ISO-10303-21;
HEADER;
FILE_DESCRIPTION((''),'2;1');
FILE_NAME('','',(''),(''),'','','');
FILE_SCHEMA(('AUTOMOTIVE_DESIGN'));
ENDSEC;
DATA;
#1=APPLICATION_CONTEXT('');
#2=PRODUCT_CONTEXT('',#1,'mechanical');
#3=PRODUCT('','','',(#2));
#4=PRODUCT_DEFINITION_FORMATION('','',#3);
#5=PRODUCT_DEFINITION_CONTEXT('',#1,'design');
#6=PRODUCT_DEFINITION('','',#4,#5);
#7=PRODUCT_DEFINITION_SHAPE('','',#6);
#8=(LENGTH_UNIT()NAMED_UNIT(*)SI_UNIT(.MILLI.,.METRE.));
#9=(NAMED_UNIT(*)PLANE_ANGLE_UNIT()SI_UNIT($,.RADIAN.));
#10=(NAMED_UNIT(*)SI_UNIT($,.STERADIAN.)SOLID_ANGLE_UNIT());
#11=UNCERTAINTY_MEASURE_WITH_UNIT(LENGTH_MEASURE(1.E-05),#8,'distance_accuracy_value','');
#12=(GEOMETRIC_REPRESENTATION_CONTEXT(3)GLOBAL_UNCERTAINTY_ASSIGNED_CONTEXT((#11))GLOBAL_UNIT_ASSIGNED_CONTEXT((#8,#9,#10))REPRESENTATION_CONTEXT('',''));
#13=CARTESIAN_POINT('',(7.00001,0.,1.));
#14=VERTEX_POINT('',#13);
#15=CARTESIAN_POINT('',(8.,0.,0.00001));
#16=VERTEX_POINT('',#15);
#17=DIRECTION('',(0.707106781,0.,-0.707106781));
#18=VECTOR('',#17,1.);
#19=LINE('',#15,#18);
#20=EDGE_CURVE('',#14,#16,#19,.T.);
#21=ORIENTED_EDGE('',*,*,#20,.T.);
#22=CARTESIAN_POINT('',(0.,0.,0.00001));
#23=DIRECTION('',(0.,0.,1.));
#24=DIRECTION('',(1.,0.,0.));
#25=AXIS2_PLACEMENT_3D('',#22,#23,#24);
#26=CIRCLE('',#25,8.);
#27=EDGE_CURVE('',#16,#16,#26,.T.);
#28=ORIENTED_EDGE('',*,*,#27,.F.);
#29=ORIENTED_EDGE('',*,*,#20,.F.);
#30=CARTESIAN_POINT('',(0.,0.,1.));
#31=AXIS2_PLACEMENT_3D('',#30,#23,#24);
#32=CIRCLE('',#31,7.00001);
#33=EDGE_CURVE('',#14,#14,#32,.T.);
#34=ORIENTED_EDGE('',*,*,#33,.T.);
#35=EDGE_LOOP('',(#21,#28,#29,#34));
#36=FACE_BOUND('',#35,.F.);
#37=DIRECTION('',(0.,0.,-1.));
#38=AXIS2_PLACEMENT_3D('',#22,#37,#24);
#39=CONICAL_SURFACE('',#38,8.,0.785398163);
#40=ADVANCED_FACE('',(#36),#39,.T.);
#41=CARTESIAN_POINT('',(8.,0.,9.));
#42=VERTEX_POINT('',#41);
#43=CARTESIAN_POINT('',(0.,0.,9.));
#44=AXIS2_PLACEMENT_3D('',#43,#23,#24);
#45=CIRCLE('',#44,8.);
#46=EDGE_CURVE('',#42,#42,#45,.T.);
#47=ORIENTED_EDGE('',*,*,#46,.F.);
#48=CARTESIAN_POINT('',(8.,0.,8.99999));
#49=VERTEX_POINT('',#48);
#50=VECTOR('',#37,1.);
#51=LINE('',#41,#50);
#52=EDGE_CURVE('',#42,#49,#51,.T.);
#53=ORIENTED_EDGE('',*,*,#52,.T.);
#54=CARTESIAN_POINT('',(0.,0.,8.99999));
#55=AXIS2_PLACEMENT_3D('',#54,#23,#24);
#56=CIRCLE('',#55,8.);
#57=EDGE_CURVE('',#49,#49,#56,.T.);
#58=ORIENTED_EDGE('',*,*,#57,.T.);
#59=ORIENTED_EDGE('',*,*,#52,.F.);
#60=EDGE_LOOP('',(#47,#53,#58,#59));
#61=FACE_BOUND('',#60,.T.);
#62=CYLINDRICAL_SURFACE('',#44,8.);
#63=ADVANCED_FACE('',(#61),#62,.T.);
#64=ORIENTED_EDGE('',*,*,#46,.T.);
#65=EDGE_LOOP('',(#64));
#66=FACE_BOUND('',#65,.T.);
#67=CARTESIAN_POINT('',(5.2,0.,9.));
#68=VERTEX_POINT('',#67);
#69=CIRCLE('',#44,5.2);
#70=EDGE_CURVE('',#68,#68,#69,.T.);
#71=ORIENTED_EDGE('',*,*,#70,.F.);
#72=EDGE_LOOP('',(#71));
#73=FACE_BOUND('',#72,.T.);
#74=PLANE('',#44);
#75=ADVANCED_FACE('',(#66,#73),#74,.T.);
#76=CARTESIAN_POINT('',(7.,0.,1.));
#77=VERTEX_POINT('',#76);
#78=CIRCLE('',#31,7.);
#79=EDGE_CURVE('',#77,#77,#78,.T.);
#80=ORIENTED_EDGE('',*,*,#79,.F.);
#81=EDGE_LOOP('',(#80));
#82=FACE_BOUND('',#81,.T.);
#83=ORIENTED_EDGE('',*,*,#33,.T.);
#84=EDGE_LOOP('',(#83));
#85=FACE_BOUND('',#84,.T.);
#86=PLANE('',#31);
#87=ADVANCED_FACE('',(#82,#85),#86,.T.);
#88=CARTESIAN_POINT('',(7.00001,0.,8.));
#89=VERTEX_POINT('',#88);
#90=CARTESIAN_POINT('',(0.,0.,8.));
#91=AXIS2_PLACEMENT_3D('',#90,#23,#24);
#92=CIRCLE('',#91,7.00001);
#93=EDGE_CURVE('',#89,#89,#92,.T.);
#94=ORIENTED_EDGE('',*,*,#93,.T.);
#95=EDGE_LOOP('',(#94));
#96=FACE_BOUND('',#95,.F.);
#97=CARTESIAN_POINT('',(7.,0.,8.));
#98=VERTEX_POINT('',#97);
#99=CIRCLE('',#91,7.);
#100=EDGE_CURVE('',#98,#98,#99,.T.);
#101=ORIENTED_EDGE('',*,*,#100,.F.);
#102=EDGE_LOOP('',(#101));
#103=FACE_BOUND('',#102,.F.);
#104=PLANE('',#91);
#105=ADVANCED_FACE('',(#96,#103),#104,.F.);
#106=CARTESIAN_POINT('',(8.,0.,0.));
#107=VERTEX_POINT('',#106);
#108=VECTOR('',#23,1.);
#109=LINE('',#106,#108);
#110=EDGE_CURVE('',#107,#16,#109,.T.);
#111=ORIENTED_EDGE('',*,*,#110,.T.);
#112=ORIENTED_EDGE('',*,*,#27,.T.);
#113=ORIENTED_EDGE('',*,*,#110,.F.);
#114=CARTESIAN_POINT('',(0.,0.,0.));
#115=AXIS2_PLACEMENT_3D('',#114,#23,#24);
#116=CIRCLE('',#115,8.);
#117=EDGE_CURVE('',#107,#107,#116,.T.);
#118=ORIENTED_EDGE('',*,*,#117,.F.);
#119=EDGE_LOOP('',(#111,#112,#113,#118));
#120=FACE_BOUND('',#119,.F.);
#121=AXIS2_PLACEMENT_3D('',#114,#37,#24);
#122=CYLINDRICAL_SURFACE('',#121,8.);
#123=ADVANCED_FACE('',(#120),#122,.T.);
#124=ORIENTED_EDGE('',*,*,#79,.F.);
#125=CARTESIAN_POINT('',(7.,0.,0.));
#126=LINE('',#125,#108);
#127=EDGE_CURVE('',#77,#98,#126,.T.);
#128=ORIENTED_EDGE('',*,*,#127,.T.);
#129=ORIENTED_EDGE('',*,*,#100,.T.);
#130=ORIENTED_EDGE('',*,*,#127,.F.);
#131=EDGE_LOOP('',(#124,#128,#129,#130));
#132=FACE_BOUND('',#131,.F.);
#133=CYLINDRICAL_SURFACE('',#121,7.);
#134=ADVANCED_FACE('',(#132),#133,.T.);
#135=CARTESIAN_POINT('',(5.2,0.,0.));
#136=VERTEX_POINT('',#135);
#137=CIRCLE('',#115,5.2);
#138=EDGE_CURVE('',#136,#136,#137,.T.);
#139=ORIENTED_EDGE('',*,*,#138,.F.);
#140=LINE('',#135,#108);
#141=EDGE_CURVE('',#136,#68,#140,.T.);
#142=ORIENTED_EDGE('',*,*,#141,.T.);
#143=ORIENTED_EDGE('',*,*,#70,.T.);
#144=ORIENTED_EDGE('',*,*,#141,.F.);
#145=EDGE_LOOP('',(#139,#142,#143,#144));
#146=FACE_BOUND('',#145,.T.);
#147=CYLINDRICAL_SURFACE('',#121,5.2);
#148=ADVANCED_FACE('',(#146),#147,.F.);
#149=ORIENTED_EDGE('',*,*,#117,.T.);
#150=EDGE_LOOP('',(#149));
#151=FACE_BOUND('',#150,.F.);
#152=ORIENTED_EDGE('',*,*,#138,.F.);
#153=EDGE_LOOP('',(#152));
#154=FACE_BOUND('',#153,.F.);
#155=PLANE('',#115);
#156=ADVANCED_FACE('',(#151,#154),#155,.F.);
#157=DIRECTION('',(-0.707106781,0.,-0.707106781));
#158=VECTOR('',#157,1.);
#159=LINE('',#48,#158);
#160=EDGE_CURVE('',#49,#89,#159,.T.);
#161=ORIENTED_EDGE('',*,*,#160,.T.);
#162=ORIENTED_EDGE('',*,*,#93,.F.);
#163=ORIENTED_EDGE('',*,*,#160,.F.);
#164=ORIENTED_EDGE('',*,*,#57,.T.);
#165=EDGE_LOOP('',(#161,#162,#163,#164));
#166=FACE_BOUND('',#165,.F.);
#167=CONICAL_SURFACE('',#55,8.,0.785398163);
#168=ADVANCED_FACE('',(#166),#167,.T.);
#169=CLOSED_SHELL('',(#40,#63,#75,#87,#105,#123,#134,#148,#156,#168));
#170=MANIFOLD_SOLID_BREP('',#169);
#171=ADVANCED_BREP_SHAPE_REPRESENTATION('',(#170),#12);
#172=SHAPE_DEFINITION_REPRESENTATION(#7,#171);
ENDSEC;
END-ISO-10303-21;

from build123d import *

# Parameters (mm, degrees)
F0_R     = 7
F0_R_2   = 5.2
F1_DEPTH = 9
F0_R_3   = 8
F2_DEPTH = 1
F3_R     = 8
F3_R_2   = 7
F4_DEPTH = 1
F5_SIZE  = 0.99999


# Not quite as in the source:
# - a fillet or chamfer is up to 0.001 mm smaller than in the source, because OpenCascade refuses the exact size


with BuildPart() as f1:
    # F0 (on Top) → F1 (new body)
    with BuildSketch(Plane.XY):
        Circle(F0_R)
        Circle(F0_R_2, mode=Mode.SUBTRACT)
    extrude(amount=F1_DEPTH)

    # F0 (on Top) → F2 (join)
    with BuildSketch(Plane.XY):
        Circle(F0_R_3)
        Circle(F0_R, mode=Mode.SUBTRACT)
    extrude(amount=F2_DEPTH)

    # F3 (on face) → F4 (join)
    with BuildSketch(Plane.XY.offset(9)):
        Circle(F3_R)
        Circle(F3_R_2, mode=Mode.SUBTRACT)
    extrude(amount=-F4_DEPTH)

    # F5 (size 1 in the source; OpenCascade refuses exactly that, so slightly less here)
    f5_edges = [f1.edges().sort_by_distance(p)[0] for p in [
        (-8, 0, 8),
        (-8, 0, 1),
    ]]
    chamfer(f5_edges, length=F5_SIZE)


solid = f1.part
